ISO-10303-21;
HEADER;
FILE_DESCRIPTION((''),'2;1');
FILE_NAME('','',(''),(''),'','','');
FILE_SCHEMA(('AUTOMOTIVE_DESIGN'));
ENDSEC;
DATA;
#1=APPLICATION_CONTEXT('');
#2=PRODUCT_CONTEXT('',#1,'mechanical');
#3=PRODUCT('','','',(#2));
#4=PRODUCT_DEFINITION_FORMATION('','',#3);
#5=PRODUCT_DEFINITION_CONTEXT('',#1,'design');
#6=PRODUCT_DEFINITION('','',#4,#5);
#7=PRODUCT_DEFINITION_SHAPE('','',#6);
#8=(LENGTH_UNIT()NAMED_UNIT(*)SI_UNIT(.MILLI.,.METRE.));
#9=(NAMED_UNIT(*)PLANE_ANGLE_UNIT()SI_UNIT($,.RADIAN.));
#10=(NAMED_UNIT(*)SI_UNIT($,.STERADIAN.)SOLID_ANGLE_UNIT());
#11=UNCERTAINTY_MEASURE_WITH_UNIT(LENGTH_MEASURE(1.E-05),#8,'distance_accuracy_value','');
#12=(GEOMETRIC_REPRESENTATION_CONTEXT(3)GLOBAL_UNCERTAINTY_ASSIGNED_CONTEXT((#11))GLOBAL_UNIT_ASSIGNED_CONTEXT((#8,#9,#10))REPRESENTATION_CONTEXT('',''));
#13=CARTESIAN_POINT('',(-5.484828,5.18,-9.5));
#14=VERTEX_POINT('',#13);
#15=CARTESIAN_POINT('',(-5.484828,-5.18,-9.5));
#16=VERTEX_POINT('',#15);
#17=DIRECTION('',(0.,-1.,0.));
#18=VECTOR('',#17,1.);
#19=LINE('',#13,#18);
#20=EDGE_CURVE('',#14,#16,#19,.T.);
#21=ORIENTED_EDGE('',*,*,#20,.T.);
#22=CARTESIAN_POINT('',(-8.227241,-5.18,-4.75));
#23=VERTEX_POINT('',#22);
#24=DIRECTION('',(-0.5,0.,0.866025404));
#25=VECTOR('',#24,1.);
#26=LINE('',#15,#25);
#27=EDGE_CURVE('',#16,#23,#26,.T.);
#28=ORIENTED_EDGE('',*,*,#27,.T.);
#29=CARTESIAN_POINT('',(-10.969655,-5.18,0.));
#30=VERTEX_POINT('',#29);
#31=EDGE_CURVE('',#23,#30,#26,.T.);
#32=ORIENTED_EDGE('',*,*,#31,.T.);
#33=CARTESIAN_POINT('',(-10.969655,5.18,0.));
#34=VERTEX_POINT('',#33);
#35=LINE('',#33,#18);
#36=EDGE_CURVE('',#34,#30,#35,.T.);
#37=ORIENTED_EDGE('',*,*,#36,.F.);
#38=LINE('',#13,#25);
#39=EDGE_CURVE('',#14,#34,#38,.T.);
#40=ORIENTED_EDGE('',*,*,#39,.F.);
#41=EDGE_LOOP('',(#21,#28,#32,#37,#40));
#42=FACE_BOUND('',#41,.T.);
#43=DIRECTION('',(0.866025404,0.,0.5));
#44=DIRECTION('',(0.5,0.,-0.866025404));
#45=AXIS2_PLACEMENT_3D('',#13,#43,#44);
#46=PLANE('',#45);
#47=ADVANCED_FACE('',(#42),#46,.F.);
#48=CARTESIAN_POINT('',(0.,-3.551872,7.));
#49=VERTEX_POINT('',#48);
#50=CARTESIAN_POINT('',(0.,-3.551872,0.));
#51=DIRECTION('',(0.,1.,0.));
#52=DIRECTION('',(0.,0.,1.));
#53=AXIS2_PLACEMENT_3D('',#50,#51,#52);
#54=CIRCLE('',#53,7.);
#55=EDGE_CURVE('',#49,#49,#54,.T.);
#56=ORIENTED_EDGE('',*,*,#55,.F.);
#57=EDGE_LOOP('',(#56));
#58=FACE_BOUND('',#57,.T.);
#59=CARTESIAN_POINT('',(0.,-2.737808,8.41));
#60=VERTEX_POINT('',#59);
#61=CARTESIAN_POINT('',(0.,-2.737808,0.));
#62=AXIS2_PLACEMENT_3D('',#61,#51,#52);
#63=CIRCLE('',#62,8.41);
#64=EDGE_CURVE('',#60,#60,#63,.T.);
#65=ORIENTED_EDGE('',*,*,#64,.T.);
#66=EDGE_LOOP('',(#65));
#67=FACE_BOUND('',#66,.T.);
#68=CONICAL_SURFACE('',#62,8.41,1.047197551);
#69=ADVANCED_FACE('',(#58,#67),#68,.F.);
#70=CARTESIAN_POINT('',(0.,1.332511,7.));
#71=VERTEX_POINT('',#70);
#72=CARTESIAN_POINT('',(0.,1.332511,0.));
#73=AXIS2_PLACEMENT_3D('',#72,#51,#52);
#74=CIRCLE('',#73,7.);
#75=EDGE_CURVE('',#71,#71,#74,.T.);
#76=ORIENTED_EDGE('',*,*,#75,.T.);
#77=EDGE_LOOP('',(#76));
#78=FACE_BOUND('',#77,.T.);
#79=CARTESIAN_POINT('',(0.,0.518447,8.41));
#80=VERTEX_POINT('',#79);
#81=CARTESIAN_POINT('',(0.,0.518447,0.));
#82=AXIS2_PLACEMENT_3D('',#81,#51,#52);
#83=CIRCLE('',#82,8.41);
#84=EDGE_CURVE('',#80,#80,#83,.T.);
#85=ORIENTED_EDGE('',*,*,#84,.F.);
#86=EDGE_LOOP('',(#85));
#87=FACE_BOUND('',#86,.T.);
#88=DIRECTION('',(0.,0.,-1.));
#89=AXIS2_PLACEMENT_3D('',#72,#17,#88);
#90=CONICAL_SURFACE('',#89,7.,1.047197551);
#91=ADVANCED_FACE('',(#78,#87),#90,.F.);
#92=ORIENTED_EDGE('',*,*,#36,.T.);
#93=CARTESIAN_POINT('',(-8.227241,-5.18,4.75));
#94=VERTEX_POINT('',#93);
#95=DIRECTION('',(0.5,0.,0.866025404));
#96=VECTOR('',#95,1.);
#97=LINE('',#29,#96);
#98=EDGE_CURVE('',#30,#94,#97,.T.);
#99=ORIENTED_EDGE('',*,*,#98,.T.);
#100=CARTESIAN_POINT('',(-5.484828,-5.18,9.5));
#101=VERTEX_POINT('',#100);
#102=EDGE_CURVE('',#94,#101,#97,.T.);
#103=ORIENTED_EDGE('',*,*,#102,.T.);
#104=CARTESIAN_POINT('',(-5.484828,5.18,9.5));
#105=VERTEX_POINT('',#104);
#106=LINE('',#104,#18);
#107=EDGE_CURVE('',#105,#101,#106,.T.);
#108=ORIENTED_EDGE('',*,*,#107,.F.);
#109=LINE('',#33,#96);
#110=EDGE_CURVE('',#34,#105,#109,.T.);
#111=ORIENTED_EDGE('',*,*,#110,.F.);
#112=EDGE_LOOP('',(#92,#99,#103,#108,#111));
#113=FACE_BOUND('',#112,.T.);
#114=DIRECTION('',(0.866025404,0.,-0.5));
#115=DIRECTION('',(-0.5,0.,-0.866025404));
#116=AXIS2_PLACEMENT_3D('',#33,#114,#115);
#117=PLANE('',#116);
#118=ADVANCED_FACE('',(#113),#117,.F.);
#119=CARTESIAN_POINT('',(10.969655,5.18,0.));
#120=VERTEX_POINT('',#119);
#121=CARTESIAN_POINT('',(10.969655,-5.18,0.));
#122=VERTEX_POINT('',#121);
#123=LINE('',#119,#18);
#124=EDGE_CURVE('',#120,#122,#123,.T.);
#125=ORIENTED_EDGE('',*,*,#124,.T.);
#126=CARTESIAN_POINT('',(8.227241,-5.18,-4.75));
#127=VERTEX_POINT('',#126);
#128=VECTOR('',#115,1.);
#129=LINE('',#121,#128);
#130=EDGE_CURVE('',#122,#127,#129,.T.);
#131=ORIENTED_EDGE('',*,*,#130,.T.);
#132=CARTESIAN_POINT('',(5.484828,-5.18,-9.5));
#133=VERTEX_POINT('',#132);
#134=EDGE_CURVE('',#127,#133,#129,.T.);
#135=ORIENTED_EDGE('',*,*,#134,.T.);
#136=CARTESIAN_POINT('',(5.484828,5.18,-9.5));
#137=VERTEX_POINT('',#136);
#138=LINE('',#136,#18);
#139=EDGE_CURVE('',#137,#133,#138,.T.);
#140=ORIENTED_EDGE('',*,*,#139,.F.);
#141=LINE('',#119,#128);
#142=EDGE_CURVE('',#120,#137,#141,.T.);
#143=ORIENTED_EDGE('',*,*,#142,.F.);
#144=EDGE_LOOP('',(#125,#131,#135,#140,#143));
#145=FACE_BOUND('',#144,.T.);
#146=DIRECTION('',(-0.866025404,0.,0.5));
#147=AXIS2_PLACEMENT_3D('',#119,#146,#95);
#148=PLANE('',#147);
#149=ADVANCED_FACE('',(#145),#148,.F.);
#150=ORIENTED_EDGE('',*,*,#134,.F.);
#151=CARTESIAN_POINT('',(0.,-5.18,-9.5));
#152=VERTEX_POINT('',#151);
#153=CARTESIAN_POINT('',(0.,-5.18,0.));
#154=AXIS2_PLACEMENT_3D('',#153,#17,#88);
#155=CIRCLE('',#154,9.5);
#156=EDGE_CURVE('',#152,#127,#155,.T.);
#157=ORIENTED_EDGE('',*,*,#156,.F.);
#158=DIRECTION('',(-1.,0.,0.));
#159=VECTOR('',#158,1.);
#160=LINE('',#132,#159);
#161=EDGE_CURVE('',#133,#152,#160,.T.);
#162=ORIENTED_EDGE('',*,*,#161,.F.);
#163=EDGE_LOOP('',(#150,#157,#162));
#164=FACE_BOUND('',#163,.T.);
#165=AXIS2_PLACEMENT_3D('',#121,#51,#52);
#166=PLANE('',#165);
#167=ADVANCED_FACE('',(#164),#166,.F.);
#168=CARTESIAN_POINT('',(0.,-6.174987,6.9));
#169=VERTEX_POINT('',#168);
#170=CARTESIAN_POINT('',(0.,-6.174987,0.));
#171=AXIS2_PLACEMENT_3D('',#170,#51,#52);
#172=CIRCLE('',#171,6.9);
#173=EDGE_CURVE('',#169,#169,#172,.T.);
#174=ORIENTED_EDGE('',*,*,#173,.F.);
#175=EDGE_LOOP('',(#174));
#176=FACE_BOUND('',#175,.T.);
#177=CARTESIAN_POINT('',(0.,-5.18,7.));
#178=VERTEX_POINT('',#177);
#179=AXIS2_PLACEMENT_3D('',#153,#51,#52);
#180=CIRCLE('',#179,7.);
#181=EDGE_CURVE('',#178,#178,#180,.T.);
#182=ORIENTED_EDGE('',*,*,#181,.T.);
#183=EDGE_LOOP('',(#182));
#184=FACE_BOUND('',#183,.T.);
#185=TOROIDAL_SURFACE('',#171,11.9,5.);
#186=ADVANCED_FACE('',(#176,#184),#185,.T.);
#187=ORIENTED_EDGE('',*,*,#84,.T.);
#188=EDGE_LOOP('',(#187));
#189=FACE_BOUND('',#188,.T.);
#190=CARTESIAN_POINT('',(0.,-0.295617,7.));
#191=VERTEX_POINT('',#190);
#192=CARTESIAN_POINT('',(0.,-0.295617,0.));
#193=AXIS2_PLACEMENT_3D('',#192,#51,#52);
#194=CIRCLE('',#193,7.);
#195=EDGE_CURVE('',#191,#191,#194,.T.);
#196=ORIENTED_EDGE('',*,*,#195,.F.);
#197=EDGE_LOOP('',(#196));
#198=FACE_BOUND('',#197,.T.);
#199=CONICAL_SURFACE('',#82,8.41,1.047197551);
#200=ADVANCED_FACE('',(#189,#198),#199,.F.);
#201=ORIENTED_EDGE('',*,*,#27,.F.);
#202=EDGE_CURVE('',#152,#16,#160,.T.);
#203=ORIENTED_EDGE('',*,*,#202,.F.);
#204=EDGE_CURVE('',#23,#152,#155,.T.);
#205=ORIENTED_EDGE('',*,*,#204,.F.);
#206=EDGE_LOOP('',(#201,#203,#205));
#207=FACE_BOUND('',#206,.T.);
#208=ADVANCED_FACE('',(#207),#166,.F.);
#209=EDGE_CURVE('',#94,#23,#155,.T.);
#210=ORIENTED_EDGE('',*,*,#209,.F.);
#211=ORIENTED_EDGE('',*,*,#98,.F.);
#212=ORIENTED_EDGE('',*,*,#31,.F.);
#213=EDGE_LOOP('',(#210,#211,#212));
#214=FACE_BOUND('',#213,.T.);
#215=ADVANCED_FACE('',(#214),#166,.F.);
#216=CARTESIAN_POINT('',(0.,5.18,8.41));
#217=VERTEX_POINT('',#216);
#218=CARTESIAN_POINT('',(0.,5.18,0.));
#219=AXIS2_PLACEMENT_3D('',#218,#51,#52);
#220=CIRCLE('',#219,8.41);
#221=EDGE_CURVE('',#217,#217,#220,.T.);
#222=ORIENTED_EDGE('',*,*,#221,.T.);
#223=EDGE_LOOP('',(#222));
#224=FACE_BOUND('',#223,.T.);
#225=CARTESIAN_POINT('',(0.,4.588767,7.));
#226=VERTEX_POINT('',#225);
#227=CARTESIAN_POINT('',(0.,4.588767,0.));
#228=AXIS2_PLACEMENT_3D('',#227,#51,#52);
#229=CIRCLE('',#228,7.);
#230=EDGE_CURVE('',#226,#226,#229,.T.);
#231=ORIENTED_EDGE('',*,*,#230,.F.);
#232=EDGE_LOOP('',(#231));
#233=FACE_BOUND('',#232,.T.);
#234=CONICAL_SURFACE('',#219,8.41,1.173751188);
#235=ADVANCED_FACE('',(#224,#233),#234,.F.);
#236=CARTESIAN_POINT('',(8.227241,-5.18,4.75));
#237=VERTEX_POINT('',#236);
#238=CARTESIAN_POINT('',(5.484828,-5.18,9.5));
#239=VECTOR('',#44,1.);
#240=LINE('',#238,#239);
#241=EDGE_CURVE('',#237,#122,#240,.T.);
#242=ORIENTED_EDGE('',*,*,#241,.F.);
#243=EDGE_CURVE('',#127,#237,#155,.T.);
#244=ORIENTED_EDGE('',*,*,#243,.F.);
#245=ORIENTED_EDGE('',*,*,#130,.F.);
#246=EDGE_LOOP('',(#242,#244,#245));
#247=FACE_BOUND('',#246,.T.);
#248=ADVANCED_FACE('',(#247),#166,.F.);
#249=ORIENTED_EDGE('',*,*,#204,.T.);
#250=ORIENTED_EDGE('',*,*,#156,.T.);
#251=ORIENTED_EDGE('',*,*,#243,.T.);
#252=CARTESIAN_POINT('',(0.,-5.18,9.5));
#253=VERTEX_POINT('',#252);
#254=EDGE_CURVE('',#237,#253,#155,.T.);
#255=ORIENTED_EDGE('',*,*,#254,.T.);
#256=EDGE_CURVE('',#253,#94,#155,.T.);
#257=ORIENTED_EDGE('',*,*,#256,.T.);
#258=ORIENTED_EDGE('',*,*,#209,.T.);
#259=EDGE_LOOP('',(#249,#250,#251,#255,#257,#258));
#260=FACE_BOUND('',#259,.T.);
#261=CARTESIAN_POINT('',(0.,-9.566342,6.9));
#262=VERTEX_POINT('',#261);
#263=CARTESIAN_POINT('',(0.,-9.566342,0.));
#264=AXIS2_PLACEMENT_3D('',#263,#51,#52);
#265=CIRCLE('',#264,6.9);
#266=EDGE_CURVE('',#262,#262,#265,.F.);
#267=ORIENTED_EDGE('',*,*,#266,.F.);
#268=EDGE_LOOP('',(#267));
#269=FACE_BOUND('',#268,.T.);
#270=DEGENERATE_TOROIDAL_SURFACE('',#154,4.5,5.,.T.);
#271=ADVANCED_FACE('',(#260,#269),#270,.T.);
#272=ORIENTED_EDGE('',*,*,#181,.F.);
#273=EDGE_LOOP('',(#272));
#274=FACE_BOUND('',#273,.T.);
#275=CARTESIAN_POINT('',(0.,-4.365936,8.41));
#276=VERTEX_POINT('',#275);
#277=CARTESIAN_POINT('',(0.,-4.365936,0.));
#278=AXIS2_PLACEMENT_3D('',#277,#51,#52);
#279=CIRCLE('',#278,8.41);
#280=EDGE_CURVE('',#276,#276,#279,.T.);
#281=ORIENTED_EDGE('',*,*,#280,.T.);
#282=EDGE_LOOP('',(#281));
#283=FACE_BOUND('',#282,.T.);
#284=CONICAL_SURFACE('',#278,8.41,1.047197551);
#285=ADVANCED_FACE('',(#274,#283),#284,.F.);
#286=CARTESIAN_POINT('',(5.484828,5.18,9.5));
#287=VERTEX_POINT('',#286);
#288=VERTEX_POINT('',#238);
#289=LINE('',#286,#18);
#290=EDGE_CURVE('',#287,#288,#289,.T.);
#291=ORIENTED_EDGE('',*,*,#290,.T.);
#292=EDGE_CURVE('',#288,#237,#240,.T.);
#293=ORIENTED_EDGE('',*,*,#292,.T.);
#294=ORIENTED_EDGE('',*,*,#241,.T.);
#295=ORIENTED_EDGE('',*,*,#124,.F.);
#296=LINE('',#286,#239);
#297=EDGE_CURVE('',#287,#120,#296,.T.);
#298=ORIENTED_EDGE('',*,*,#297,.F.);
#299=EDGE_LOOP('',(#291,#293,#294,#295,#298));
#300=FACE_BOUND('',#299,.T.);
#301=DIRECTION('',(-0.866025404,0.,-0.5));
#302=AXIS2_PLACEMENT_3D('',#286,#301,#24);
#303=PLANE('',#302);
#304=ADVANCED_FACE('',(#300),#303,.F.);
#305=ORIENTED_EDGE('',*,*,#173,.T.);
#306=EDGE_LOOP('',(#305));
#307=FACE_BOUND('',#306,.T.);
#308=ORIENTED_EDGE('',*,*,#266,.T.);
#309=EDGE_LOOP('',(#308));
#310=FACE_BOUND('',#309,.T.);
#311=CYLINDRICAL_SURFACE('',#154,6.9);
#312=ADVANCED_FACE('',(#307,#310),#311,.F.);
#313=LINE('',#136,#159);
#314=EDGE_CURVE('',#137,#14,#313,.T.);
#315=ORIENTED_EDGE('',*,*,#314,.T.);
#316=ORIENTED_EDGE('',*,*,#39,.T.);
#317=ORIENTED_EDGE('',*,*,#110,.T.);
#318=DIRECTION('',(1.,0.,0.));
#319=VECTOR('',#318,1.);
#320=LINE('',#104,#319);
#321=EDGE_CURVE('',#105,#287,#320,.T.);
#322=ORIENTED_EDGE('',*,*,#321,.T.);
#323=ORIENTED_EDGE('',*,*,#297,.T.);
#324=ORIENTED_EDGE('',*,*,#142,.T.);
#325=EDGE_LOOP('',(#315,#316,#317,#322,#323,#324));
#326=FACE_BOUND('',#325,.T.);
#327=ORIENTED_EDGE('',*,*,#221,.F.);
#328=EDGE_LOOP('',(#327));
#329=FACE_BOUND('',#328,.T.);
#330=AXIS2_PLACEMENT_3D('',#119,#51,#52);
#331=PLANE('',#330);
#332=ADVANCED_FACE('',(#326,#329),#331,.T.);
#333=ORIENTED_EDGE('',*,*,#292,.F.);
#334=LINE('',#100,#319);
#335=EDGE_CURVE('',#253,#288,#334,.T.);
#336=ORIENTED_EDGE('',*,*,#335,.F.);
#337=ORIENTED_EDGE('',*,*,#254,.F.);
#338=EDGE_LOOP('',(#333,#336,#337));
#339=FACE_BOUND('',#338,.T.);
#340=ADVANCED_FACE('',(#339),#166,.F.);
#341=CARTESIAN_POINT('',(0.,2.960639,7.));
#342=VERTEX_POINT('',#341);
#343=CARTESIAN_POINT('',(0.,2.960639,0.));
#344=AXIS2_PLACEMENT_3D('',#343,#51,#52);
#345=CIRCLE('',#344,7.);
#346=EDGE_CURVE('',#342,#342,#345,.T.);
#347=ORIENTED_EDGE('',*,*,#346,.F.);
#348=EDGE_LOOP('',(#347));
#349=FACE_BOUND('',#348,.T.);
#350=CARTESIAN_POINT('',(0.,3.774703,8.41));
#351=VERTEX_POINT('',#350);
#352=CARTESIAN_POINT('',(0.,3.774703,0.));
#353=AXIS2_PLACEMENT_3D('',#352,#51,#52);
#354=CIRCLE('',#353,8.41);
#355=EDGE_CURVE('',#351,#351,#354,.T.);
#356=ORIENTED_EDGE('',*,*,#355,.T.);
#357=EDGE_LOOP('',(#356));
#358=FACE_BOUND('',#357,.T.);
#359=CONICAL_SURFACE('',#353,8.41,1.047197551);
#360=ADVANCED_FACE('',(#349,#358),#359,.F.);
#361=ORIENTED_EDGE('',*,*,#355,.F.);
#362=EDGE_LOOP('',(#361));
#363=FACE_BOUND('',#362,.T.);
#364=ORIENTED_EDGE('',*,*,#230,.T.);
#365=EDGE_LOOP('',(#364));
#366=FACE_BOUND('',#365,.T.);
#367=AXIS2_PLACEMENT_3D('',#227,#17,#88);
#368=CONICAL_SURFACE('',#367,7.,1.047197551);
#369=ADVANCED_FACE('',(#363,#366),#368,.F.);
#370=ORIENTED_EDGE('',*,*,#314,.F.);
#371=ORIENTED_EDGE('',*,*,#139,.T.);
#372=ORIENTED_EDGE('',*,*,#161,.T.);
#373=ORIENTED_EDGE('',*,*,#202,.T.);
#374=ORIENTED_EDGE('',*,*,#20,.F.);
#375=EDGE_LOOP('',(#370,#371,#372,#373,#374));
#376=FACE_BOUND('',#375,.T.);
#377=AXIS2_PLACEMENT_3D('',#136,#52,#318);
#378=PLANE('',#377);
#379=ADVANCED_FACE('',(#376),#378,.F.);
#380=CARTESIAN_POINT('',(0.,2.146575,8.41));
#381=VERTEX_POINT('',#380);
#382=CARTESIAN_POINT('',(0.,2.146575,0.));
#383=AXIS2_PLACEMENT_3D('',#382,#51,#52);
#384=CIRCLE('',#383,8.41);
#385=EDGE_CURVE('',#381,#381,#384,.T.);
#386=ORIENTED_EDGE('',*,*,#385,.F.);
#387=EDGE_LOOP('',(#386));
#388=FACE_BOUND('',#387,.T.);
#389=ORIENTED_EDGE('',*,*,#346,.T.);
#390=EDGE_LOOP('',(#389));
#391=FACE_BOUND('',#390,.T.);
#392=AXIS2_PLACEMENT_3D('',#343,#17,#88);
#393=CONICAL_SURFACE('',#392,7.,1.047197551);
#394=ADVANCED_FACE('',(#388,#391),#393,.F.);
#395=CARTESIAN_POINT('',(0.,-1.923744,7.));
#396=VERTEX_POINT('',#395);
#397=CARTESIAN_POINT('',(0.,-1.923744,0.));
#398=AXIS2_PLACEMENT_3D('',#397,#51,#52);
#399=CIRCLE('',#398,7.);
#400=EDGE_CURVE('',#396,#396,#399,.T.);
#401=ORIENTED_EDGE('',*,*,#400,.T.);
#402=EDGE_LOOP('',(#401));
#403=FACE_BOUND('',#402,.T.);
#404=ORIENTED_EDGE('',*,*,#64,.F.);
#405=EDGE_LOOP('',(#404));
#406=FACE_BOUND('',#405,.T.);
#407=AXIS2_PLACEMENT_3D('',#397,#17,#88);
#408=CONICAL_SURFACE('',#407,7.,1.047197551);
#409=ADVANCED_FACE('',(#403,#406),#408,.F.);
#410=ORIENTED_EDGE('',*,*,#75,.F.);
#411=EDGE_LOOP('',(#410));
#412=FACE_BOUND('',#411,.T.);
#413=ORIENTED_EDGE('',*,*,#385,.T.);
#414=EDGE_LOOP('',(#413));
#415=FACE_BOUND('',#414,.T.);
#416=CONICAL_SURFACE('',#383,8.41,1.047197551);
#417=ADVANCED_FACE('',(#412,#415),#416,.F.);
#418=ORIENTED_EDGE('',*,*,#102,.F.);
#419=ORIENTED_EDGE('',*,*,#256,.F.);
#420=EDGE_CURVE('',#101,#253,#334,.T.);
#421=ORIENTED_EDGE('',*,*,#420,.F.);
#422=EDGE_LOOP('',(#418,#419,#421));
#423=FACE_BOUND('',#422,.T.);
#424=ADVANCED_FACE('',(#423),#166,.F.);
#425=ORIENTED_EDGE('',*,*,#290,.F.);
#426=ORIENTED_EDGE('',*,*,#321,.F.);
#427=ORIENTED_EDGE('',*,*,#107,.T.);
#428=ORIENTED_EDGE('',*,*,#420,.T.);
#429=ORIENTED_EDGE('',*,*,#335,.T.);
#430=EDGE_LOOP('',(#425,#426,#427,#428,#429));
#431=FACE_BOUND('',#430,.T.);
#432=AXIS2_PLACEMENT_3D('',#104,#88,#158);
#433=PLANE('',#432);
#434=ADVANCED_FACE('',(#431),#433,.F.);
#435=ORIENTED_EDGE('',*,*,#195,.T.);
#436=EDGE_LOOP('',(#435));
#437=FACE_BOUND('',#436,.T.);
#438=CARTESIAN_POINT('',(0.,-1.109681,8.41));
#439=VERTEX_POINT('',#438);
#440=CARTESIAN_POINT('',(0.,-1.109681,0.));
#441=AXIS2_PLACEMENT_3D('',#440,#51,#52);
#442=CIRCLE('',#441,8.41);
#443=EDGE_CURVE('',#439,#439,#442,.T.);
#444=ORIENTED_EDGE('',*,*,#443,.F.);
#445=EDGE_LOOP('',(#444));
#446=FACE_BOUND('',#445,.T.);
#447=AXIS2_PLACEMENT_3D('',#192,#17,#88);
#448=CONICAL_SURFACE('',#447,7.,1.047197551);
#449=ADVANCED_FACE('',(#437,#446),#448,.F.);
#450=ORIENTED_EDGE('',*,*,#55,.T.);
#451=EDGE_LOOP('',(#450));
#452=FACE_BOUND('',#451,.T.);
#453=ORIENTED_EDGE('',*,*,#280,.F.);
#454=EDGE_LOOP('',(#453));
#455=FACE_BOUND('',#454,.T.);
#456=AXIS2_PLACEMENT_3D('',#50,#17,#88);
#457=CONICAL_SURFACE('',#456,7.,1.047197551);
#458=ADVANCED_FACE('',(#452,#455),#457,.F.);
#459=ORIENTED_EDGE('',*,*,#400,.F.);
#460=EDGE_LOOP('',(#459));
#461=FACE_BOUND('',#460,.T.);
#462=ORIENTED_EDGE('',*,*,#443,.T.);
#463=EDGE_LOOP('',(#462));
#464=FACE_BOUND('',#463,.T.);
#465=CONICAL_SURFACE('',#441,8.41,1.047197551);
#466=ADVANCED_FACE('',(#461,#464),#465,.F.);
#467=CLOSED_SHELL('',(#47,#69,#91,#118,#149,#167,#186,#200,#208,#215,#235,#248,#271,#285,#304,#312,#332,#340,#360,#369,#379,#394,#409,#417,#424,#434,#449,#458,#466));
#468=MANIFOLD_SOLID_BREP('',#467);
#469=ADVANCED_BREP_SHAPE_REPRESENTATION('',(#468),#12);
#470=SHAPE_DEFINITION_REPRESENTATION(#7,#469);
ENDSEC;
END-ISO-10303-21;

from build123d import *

# Parameters (mm, degrees)
BOSS_EXTRUDE1_DEPTH = 5.18
SKETCH3_R           = 9.5
BOSS_EXTRUDE2_DEPTH = 5
FILLET3_R           = 5
SKETCH4_R           = 6.9
CUT_EXTRUDE1_DEPTH  = 5
FILLET4_R           = 5


# Some blends are built 0.0001 mm under size
with BuildPart() as part:
    # Sketch1 → Boss-Extrude1 (new, symmetric)
    with BuildSketch(Plane(origin=(0, 0, 0), x_dir=(1, 0, 0), z_dir=(0, 1, 0))):
        Polygon((10.969655115, 0), (5.484827557, 9.5), (-5.484827557, 9.5), (-10.969655115, 0), (-5.484827557, -9.5), (5.484827557, -9.5), align=None)
    extrude(amount=BOSS_EXTRUDE1_DEPTH, both=True)

    # Sketch2 → Cut-Revolve1 (revolve, cut)
    with BuildSketch(Plane(origin=(0, 0, 0), x_dir=(0, 0, -1), z_dir=(1, 0, 0))):
        Polygon((-8.41, 5.18), (0, 5.18), (0, -5.18), (-7, -5.18), (-8.41, -4.36593612), (-7, -3.551872241), (-8.41, -2.737808361), (-7, -1.923744482), (-8.41, -1.109680602), (-7, -0.295616723), (-8.41, 0.518447157), (-7, 1.332511036), (-8.41, 2.146574916), (-7, 2.960638796), (-8.41, 3.774702675), (-7, 4.588766555), align=None)
    revolve(axis=Axis((0, 5.18, 0), (0, -1, 0)), mode=Mode.SUBTRACT)

    # Sketch3 → Boss-Extrude2 (add)
    with BuildSketch(Plane.XZ.offset(5.18)):
        with Locations(Location((0, 0, 0), (0, 0, 270))):
            Circle(SKETCH3_R)
    extrude(amount=BOSS_EXTRUDE2_DEPTH)

    # Fillet3
    fillet3_edges = [part.edges().sort_by_distance(p)[0] for p in [
        (0, -10.18, 9.5),
    ]]
    fillet(fillet3_edges, radius=FILLET3_R - 0.0001)  # a hair under: the kernel refuses the full size

    # Sketch4 → Cut-Extrude1 (cut)
    with BuildSketch(Plane.XZ.offset(10.18)):
        with Locations(Location((0, 0, 0), (0, 0, 270))):
            Circle(SKETCH4_R)
    extrude(amount=-CUT_EXTRUDE1_DEPTH, mode=Mode.SUBTRACT)

    # Fillet4
    # the kernel refuses this fillet: 5 mm, written as the material it takes off along each edge
    with BuildSketch(Plane(origin=(0, -5.18, 0), x_dir=(0, 0, -1), z_dir=(-1, 0, 0))) as fillet4_piece_1:
        with BuildLine():
            CenterArc((11.9, 0.994987437), FILLET4_R, 180, 11.478340955)
            Line((7, 0), (6.9, 0))
            Line((6.9, 0), (6.9, 0.994987437))
        make_face()
    revolve(axis=Axis((0, -5.18, 0), (0, -1, 0)), mode=Mode.SUBTRACT)


solid = part.part
